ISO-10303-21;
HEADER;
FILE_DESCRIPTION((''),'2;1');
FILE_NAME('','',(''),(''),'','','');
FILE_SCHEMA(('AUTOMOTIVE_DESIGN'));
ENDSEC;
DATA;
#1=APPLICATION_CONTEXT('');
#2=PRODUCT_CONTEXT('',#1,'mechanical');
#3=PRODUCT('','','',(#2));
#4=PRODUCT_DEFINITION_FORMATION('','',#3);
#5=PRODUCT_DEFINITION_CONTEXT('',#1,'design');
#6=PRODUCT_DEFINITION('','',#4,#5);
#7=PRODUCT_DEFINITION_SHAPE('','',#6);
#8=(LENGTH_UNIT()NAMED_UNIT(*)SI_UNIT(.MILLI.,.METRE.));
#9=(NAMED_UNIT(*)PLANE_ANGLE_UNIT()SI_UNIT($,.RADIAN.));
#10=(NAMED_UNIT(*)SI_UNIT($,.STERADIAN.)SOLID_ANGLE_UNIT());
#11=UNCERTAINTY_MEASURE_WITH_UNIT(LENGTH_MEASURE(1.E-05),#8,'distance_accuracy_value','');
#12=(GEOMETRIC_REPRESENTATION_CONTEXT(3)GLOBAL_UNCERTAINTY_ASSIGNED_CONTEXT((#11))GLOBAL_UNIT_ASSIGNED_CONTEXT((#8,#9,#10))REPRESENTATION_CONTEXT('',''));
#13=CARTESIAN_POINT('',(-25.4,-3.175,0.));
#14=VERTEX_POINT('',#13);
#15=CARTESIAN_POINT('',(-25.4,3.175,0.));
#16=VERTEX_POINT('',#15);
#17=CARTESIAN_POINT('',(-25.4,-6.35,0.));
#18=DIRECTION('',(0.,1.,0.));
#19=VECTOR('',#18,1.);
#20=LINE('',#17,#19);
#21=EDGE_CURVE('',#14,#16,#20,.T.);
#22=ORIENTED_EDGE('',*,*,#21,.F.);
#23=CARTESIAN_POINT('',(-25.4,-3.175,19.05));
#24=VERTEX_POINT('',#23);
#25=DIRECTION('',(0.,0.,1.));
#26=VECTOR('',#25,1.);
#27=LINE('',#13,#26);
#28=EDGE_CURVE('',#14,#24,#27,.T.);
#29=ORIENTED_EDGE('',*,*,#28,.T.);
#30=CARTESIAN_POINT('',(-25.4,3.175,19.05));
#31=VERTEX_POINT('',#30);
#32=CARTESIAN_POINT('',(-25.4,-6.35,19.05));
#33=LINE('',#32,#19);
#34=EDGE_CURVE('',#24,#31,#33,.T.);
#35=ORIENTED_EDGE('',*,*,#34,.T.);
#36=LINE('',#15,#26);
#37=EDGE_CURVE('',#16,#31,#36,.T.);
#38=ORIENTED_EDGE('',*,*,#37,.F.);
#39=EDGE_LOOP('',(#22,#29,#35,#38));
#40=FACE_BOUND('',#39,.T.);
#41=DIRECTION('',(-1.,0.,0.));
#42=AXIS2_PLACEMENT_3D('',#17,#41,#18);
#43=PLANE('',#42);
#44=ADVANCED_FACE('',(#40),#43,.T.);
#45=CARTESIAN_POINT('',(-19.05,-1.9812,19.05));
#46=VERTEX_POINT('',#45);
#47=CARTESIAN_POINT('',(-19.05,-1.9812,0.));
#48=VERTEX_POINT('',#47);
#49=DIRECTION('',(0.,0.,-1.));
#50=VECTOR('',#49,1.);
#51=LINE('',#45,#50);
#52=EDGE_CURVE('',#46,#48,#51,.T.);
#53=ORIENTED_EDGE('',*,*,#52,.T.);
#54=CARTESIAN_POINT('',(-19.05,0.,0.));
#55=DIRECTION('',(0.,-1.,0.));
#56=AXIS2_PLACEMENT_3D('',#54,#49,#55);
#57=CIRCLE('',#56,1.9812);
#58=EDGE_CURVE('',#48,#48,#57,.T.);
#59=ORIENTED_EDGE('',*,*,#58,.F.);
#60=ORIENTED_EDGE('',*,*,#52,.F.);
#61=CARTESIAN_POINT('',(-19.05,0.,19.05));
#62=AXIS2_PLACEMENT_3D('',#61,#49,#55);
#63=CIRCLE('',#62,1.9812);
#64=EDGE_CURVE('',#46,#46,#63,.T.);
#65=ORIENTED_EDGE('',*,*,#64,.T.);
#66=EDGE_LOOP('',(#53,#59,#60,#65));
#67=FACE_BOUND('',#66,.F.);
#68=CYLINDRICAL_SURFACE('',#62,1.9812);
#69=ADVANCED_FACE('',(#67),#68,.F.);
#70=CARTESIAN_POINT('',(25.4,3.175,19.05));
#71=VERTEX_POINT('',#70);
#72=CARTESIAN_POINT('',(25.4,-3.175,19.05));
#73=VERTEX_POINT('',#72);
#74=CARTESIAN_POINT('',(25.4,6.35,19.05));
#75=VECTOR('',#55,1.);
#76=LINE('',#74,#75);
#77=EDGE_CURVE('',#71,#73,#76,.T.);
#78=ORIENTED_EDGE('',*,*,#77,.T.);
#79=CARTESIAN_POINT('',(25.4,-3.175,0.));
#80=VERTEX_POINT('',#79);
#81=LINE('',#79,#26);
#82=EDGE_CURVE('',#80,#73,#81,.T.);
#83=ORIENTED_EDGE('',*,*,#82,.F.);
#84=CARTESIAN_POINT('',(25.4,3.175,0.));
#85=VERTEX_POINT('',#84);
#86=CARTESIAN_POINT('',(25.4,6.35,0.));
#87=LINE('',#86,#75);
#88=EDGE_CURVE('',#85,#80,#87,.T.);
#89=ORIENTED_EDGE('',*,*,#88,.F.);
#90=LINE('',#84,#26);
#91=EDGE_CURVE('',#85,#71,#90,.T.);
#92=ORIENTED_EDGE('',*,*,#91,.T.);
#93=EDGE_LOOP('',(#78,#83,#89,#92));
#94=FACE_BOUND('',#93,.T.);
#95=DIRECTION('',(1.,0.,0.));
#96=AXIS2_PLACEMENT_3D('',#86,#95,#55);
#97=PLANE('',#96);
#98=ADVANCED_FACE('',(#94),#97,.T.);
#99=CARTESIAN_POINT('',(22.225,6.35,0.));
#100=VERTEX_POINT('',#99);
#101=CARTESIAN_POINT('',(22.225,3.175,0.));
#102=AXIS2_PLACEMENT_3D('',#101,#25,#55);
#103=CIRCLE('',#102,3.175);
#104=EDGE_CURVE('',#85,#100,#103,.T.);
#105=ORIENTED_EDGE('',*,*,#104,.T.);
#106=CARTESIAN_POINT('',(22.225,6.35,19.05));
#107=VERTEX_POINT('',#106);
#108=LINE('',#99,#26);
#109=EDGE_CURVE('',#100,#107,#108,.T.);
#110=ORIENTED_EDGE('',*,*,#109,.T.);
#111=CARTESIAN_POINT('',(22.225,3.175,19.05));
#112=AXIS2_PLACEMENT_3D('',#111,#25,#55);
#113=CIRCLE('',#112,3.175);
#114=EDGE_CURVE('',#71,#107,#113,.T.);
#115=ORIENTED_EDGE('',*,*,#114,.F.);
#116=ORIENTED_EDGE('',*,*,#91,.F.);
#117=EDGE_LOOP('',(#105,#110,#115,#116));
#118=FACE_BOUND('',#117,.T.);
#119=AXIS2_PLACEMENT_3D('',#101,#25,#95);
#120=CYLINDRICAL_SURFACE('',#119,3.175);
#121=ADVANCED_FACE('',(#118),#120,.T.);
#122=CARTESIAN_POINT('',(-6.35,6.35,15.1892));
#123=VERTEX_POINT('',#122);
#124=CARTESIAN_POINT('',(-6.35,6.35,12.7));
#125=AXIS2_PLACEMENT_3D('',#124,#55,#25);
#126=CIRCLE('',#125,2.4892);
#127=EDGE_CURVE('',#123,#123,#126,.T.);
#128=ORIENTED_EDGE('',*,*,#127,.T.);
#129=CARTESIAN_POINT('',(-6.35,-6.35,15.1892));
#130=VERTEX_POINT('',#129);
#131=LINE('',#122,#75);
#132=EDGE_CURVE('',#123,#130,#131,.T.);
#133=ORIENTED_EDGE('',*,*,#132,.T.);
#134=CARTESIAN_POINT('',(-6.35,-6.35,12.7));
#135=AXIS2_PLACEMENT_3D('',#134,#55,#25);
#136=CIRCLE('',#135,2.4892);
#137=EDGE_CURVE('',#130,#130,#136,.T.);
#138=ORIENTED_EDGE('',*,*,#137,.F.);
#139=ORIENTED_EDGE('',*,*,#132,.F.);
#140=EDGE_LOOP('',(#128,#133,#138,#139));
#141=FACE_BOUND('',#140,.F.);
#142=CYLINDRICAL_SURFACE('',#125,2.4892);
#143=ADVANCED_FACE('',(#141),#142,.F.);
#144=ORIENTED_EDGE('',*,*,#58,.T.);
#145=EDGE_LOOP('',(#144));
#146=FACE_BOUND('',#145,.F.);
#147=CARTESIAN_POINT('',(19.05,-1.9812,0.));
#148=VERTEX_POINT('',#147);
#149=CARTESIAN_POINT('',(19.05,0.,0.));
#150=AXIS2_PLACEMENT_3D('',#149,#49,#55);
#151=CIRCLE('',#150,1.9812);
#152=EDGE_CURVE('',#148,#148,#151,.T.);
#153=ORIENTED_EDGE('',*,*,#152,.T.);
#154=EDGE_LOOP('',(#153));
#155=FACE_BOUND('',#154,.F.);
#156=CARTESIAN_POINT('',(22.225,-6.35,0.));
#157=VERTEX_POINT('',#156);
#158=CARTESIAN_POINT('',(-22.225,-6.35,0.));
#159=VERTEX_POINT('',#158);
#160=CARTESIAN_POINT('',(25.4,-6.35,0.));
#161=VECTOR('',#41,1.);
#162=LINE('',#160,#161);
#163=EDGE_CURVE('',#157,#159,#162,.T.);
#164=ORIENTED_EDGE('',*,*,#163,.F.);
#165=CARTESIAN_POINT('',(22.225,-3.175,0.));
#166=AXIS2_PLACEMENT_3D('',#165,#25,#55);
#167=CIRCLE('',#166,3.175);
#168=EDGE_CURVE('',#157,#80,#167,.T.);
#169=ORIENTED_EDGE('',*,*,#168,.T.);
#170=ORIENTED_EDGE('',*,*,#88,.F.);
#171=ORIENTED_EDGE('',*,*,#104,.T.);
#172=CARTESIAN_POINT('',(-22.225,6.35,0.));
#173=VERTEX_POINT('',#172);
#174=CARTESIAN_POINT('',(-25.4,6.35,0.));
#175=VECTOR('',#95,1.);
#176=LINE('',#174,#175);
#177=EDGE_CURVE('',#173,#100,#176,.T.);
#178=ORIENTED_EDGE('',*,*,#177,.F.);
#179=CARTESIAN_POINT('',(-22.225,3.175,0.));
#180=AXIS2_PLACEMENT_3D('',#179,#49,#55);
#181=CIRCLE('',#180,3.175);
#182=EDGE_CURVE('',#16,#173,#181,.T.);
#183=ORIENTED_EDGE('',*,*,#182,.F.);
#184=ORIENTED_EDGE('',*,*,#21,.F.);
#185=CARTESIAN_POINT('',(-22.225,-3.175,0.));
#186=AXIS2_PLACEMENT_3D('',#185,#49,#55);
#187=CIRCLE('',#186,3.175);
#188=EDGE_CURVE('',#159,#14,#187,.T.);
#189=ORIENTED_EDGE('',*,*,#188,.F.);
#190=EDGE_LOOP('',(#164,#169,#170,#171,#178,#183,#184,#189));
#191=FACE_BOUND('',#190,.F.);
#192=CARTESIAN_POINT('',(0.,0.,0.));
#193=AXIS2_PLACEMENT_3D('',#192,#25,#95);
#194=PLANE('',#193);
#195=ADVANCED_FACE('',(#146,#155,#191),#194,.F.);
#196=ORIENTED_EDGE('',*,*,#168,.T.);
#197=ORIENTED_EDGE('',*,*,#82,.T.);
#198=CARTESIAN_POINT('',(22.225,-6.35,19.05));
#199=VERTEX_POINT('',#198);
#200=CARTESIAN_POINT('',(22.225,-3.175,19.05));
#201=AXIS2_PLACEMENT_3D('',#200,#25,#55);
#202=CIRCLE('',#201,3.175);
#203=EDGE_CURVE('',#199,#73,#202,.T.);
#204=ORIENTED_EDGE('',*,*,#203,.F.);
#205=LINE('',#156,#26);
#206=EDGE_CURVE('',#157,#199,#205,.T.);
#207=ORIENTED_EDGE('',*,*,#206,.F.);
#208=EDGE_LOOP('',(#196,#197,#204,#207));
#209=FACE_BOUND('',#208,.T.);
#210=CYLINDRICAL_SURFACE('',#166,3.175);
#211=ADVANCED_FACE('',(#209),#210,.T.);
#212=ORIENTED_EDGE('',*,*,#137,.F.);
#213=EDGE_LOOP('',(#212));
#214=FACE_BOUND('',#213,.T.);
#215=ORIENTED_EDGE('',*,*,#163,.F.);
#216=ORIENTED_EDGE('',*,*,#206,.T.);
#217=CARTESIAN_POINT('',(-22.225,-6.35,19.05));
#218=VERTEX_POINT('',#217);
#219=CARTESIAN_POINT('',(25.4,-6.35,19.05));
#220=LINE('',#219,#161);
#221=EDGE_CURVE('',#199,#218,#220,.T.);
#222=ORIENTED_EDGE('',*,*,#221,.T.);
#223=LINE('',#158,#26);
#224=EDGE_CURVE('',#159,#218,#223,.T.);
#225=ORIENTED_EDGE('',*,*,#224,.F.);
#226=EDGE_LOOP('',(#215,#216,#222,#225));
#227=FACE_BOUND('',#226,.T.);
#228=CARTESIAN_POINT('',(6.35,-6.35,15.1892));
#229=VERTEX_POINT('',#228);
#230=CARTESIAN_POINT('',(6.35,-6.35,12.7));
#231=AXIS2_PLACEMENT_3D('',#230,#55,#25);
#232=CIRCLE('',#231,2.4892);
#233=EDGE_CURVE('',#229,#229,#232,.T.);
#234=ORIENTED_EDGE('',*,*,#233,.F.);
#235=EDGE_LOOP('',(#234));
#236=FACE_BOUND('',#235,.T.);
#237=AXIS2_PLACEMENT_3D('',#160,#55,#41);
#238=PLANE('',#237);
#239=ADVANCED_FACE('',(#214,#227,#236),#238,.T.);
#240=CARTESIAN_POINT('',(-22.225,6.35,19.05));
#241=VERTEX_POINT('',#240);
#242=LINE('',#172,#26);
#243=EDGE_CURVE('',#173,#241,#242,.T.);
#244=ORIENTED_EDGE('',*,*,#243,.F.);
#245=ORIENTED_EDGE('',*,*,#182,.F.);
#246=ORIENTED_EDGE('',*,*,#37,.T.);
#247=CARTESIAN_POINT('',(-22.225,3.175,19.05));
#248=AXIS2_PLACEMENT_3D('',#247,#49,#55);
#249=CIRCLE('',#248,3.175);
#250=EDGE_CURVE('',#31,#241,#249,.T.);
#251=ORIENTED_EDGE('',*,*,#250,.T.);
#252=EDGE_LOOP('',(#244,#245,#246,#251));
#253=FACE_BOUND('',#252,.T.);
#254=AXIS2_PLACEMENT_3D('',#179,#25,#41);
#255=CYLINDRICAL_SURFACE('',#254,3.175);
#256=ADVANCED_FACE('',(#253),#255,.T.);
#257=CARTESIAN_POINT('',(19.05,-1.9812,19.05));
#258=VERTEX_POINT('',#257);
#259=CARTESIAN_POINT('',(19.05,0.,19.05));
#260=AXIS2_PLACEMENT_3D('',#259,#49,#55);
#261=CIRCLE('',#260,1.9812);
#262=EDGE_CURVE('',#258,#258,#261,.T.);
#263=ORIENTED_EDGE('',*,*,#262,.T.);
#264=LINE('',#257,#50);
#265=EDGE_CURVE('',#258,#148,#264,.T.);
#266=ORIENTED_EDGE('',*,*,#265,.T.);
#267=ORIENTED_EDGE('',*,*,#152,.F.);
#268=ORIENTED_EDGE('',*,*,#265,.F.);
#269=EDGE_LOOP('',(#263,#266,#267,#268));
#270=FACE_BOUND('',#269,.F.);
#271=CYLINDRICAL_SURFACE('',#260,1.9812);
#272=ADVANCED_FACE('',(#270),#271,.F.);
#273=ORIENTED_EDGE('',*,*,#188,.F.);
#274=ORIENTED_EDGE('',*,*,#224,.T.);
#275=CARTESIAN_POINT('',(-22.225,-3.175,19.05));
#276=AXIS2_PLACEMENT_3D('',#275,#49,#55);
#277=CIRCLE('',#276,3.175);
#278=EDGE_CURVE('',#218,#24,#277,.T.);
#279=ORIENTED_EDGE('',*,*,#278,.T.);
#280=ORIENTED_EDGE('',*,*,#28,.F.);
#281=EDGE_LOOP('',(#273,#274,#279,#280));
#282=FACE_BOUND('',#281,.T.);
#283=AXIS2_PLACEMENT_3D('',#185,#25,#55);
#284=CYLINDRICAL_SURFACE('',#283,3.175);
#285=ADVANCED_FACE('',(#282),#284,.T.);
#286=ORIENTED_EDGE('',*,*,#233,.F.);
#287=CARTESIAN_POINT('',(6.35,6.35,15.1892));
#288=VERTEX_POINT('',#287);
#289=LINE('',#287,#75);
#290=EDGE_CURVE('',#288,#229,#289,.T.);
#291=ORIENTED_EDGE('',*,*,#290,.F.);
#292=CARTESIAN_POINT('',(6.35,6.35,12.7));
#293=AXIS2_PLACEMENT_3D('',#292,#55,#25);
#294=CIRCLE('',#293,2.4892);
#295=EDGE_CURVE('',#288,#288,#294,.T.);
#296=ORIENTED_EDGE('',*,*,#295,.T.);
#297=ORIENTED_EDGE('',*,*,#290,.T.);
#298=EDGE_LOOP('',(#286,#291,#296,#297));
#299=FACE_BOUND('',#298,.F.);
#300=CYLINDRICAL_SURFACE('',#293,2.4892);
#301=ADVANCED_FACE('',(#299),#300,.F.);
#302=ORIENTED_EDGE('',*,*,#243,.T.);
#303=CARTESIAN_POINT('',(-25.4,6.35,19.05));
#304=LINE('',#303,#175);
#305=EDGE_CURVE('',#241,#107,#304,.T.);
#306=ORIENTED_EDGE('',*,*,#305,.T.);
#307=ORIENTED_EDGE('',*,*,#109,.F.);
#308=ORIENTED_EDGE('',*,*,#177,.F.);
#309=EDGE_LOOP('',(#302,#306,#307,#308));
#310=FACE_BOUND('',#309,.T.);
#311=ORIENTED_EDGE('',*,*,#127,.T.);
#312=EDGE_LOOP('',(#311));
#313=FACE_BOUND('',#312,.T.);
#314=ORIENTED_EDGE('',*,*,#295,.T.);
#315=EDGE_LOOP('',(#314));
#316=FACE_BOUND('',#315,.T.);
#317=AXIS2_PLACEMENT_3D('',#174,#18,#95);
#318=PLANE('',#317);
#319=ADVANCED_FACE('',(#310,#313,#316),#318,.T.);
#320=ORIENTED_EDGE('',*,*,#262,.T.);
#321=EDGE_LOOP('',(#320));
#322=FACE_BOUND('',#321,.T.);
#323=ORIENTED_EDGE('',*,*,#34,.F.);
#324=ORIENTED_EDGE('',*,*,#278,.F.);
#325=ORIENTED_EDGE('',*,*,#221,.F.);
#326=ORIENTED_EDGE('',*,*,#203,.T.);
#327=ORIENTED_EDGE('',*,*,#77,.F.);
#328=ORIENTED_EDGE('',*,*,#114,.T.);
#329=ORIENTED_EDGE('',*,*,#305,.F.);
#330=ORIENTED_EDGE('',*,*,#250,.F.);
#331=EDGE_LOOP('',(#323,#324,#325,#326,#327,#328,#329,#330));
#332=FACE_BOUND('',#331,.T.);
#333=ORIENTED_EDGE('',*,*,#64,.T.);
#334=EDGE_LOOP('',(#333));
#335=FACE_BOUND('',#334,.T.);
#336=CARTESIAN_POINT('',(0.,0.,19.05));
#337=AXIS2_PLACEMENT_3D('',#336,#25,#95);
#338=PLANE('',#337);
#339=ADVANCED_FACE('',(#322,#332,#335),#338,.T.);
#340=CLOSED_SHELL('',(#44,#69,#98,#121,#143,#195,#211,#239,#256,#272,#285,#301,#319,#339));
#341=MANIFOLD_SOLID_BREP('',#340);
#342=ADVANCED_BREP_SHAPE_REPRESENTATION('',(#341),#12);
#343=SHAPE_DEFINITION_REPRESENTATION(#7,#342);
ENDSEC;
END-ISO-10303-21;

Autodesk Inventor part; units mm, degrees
ref_plane "YZ Plane" through (0, 0, 0) normal (1, 0, 0) x (0, 1, 0)
ref_plane "XZ Plane" through (0, 0, 0) normal (0, 1, 0) x (-1, 0, 0)
ref_plane "XY Plane" through (0, 0, 0) normal (0, 0, 1) x (1, 0, 0)
sketch "Sketch1" plane through (0, 0, 0) normal (0, 0, 1) x (1, 0, 0)
  line L0 (25.4, -6.35) -> (-25.4, -6.35)
  line L1 (-25.4, -6.35) -> (-25.4, 6.35)
  line L2 (-25.4, 6.35) -> (25.4, 6.35)
  line L3 (25.4, 6.35) -> (25.4, -6.35)
  line L4 (25.4, -6.35) -> (-25.4, 6.35) construction
  line L5 (-25.4, -6.35) -> (25.4, 6.35) construction
  point P0 (0, 0)
  dimension "d0" = 50.8
  dimension "d1" = 12.7
extrude "Extrusion1" add sketch "Sketch1" along normal blind 19.05
sketch "Sketch2" plane through (-25.4, 6.35, 0) normal (0, 1, 0) x (1, 0, 0)
  line L0 (0, 0) -> (0, -19.05) construction
  line L1 (19.05, -12.7) -> (31.75, -12.7) construction
  line L2 (50.8, 0) -> (0, 0) construction
  line L3 (50.8, -19.05) -> (0, -19.05) construction
  point P0 (25.4, 0)
  point P1 (0, -9.525)
  point P2 (25.4, -12.7)
  point P3 (25.4, 0)
  point P4 (25.4, 0)
  dimension "d4" = 12.7
  dimension "d20" = 6.35
hole "Hole1" at (-6.35, 6.35, 12.7) at (6.35, 6.35, 12.7) direction (0, -1, 0) diameter 4.9784 end through all thread size "1/4-20 UNC" class "2B" standard "ANSI Unified Screw Threads"
sketch "Sketch3" plane through (0, 0, 19.05) normal (0, 0, 1) x (1, 0, 0)
  line L0 (-19.05, 0) -> (19.05, 0) construction
  line L1 (-25.4, 6.35) -> (-25.4, -6.35) construction
  line L2 (25.4, 6.35) -> (-25.4, 6.35) construction
  point P0 (0, 0)
  point P1 (-25.4, 0)
  point P2 (0, 0)
  point P3 (0, 6.35)
  dimension "d12" = 38.1
hole "Hole2" at (-19.05, 0, 19.05) at (19.05, 0, 19.05) direction (0, 0, -1) diameter 3.9624 end through all thread size "10-32 UNF" class "2B" standard "ANSI Unified Screw Threads"
fillet "Fillet1" radius 3.175 4 edges at (-25.4, 6.35, 9.525) (-25.4, -6.35, 9.525) (25.4, 6.35, 9.525) (25.4, -6.35, 9.525)
properties part number "CL7-014" material "Aluminum 6061"
